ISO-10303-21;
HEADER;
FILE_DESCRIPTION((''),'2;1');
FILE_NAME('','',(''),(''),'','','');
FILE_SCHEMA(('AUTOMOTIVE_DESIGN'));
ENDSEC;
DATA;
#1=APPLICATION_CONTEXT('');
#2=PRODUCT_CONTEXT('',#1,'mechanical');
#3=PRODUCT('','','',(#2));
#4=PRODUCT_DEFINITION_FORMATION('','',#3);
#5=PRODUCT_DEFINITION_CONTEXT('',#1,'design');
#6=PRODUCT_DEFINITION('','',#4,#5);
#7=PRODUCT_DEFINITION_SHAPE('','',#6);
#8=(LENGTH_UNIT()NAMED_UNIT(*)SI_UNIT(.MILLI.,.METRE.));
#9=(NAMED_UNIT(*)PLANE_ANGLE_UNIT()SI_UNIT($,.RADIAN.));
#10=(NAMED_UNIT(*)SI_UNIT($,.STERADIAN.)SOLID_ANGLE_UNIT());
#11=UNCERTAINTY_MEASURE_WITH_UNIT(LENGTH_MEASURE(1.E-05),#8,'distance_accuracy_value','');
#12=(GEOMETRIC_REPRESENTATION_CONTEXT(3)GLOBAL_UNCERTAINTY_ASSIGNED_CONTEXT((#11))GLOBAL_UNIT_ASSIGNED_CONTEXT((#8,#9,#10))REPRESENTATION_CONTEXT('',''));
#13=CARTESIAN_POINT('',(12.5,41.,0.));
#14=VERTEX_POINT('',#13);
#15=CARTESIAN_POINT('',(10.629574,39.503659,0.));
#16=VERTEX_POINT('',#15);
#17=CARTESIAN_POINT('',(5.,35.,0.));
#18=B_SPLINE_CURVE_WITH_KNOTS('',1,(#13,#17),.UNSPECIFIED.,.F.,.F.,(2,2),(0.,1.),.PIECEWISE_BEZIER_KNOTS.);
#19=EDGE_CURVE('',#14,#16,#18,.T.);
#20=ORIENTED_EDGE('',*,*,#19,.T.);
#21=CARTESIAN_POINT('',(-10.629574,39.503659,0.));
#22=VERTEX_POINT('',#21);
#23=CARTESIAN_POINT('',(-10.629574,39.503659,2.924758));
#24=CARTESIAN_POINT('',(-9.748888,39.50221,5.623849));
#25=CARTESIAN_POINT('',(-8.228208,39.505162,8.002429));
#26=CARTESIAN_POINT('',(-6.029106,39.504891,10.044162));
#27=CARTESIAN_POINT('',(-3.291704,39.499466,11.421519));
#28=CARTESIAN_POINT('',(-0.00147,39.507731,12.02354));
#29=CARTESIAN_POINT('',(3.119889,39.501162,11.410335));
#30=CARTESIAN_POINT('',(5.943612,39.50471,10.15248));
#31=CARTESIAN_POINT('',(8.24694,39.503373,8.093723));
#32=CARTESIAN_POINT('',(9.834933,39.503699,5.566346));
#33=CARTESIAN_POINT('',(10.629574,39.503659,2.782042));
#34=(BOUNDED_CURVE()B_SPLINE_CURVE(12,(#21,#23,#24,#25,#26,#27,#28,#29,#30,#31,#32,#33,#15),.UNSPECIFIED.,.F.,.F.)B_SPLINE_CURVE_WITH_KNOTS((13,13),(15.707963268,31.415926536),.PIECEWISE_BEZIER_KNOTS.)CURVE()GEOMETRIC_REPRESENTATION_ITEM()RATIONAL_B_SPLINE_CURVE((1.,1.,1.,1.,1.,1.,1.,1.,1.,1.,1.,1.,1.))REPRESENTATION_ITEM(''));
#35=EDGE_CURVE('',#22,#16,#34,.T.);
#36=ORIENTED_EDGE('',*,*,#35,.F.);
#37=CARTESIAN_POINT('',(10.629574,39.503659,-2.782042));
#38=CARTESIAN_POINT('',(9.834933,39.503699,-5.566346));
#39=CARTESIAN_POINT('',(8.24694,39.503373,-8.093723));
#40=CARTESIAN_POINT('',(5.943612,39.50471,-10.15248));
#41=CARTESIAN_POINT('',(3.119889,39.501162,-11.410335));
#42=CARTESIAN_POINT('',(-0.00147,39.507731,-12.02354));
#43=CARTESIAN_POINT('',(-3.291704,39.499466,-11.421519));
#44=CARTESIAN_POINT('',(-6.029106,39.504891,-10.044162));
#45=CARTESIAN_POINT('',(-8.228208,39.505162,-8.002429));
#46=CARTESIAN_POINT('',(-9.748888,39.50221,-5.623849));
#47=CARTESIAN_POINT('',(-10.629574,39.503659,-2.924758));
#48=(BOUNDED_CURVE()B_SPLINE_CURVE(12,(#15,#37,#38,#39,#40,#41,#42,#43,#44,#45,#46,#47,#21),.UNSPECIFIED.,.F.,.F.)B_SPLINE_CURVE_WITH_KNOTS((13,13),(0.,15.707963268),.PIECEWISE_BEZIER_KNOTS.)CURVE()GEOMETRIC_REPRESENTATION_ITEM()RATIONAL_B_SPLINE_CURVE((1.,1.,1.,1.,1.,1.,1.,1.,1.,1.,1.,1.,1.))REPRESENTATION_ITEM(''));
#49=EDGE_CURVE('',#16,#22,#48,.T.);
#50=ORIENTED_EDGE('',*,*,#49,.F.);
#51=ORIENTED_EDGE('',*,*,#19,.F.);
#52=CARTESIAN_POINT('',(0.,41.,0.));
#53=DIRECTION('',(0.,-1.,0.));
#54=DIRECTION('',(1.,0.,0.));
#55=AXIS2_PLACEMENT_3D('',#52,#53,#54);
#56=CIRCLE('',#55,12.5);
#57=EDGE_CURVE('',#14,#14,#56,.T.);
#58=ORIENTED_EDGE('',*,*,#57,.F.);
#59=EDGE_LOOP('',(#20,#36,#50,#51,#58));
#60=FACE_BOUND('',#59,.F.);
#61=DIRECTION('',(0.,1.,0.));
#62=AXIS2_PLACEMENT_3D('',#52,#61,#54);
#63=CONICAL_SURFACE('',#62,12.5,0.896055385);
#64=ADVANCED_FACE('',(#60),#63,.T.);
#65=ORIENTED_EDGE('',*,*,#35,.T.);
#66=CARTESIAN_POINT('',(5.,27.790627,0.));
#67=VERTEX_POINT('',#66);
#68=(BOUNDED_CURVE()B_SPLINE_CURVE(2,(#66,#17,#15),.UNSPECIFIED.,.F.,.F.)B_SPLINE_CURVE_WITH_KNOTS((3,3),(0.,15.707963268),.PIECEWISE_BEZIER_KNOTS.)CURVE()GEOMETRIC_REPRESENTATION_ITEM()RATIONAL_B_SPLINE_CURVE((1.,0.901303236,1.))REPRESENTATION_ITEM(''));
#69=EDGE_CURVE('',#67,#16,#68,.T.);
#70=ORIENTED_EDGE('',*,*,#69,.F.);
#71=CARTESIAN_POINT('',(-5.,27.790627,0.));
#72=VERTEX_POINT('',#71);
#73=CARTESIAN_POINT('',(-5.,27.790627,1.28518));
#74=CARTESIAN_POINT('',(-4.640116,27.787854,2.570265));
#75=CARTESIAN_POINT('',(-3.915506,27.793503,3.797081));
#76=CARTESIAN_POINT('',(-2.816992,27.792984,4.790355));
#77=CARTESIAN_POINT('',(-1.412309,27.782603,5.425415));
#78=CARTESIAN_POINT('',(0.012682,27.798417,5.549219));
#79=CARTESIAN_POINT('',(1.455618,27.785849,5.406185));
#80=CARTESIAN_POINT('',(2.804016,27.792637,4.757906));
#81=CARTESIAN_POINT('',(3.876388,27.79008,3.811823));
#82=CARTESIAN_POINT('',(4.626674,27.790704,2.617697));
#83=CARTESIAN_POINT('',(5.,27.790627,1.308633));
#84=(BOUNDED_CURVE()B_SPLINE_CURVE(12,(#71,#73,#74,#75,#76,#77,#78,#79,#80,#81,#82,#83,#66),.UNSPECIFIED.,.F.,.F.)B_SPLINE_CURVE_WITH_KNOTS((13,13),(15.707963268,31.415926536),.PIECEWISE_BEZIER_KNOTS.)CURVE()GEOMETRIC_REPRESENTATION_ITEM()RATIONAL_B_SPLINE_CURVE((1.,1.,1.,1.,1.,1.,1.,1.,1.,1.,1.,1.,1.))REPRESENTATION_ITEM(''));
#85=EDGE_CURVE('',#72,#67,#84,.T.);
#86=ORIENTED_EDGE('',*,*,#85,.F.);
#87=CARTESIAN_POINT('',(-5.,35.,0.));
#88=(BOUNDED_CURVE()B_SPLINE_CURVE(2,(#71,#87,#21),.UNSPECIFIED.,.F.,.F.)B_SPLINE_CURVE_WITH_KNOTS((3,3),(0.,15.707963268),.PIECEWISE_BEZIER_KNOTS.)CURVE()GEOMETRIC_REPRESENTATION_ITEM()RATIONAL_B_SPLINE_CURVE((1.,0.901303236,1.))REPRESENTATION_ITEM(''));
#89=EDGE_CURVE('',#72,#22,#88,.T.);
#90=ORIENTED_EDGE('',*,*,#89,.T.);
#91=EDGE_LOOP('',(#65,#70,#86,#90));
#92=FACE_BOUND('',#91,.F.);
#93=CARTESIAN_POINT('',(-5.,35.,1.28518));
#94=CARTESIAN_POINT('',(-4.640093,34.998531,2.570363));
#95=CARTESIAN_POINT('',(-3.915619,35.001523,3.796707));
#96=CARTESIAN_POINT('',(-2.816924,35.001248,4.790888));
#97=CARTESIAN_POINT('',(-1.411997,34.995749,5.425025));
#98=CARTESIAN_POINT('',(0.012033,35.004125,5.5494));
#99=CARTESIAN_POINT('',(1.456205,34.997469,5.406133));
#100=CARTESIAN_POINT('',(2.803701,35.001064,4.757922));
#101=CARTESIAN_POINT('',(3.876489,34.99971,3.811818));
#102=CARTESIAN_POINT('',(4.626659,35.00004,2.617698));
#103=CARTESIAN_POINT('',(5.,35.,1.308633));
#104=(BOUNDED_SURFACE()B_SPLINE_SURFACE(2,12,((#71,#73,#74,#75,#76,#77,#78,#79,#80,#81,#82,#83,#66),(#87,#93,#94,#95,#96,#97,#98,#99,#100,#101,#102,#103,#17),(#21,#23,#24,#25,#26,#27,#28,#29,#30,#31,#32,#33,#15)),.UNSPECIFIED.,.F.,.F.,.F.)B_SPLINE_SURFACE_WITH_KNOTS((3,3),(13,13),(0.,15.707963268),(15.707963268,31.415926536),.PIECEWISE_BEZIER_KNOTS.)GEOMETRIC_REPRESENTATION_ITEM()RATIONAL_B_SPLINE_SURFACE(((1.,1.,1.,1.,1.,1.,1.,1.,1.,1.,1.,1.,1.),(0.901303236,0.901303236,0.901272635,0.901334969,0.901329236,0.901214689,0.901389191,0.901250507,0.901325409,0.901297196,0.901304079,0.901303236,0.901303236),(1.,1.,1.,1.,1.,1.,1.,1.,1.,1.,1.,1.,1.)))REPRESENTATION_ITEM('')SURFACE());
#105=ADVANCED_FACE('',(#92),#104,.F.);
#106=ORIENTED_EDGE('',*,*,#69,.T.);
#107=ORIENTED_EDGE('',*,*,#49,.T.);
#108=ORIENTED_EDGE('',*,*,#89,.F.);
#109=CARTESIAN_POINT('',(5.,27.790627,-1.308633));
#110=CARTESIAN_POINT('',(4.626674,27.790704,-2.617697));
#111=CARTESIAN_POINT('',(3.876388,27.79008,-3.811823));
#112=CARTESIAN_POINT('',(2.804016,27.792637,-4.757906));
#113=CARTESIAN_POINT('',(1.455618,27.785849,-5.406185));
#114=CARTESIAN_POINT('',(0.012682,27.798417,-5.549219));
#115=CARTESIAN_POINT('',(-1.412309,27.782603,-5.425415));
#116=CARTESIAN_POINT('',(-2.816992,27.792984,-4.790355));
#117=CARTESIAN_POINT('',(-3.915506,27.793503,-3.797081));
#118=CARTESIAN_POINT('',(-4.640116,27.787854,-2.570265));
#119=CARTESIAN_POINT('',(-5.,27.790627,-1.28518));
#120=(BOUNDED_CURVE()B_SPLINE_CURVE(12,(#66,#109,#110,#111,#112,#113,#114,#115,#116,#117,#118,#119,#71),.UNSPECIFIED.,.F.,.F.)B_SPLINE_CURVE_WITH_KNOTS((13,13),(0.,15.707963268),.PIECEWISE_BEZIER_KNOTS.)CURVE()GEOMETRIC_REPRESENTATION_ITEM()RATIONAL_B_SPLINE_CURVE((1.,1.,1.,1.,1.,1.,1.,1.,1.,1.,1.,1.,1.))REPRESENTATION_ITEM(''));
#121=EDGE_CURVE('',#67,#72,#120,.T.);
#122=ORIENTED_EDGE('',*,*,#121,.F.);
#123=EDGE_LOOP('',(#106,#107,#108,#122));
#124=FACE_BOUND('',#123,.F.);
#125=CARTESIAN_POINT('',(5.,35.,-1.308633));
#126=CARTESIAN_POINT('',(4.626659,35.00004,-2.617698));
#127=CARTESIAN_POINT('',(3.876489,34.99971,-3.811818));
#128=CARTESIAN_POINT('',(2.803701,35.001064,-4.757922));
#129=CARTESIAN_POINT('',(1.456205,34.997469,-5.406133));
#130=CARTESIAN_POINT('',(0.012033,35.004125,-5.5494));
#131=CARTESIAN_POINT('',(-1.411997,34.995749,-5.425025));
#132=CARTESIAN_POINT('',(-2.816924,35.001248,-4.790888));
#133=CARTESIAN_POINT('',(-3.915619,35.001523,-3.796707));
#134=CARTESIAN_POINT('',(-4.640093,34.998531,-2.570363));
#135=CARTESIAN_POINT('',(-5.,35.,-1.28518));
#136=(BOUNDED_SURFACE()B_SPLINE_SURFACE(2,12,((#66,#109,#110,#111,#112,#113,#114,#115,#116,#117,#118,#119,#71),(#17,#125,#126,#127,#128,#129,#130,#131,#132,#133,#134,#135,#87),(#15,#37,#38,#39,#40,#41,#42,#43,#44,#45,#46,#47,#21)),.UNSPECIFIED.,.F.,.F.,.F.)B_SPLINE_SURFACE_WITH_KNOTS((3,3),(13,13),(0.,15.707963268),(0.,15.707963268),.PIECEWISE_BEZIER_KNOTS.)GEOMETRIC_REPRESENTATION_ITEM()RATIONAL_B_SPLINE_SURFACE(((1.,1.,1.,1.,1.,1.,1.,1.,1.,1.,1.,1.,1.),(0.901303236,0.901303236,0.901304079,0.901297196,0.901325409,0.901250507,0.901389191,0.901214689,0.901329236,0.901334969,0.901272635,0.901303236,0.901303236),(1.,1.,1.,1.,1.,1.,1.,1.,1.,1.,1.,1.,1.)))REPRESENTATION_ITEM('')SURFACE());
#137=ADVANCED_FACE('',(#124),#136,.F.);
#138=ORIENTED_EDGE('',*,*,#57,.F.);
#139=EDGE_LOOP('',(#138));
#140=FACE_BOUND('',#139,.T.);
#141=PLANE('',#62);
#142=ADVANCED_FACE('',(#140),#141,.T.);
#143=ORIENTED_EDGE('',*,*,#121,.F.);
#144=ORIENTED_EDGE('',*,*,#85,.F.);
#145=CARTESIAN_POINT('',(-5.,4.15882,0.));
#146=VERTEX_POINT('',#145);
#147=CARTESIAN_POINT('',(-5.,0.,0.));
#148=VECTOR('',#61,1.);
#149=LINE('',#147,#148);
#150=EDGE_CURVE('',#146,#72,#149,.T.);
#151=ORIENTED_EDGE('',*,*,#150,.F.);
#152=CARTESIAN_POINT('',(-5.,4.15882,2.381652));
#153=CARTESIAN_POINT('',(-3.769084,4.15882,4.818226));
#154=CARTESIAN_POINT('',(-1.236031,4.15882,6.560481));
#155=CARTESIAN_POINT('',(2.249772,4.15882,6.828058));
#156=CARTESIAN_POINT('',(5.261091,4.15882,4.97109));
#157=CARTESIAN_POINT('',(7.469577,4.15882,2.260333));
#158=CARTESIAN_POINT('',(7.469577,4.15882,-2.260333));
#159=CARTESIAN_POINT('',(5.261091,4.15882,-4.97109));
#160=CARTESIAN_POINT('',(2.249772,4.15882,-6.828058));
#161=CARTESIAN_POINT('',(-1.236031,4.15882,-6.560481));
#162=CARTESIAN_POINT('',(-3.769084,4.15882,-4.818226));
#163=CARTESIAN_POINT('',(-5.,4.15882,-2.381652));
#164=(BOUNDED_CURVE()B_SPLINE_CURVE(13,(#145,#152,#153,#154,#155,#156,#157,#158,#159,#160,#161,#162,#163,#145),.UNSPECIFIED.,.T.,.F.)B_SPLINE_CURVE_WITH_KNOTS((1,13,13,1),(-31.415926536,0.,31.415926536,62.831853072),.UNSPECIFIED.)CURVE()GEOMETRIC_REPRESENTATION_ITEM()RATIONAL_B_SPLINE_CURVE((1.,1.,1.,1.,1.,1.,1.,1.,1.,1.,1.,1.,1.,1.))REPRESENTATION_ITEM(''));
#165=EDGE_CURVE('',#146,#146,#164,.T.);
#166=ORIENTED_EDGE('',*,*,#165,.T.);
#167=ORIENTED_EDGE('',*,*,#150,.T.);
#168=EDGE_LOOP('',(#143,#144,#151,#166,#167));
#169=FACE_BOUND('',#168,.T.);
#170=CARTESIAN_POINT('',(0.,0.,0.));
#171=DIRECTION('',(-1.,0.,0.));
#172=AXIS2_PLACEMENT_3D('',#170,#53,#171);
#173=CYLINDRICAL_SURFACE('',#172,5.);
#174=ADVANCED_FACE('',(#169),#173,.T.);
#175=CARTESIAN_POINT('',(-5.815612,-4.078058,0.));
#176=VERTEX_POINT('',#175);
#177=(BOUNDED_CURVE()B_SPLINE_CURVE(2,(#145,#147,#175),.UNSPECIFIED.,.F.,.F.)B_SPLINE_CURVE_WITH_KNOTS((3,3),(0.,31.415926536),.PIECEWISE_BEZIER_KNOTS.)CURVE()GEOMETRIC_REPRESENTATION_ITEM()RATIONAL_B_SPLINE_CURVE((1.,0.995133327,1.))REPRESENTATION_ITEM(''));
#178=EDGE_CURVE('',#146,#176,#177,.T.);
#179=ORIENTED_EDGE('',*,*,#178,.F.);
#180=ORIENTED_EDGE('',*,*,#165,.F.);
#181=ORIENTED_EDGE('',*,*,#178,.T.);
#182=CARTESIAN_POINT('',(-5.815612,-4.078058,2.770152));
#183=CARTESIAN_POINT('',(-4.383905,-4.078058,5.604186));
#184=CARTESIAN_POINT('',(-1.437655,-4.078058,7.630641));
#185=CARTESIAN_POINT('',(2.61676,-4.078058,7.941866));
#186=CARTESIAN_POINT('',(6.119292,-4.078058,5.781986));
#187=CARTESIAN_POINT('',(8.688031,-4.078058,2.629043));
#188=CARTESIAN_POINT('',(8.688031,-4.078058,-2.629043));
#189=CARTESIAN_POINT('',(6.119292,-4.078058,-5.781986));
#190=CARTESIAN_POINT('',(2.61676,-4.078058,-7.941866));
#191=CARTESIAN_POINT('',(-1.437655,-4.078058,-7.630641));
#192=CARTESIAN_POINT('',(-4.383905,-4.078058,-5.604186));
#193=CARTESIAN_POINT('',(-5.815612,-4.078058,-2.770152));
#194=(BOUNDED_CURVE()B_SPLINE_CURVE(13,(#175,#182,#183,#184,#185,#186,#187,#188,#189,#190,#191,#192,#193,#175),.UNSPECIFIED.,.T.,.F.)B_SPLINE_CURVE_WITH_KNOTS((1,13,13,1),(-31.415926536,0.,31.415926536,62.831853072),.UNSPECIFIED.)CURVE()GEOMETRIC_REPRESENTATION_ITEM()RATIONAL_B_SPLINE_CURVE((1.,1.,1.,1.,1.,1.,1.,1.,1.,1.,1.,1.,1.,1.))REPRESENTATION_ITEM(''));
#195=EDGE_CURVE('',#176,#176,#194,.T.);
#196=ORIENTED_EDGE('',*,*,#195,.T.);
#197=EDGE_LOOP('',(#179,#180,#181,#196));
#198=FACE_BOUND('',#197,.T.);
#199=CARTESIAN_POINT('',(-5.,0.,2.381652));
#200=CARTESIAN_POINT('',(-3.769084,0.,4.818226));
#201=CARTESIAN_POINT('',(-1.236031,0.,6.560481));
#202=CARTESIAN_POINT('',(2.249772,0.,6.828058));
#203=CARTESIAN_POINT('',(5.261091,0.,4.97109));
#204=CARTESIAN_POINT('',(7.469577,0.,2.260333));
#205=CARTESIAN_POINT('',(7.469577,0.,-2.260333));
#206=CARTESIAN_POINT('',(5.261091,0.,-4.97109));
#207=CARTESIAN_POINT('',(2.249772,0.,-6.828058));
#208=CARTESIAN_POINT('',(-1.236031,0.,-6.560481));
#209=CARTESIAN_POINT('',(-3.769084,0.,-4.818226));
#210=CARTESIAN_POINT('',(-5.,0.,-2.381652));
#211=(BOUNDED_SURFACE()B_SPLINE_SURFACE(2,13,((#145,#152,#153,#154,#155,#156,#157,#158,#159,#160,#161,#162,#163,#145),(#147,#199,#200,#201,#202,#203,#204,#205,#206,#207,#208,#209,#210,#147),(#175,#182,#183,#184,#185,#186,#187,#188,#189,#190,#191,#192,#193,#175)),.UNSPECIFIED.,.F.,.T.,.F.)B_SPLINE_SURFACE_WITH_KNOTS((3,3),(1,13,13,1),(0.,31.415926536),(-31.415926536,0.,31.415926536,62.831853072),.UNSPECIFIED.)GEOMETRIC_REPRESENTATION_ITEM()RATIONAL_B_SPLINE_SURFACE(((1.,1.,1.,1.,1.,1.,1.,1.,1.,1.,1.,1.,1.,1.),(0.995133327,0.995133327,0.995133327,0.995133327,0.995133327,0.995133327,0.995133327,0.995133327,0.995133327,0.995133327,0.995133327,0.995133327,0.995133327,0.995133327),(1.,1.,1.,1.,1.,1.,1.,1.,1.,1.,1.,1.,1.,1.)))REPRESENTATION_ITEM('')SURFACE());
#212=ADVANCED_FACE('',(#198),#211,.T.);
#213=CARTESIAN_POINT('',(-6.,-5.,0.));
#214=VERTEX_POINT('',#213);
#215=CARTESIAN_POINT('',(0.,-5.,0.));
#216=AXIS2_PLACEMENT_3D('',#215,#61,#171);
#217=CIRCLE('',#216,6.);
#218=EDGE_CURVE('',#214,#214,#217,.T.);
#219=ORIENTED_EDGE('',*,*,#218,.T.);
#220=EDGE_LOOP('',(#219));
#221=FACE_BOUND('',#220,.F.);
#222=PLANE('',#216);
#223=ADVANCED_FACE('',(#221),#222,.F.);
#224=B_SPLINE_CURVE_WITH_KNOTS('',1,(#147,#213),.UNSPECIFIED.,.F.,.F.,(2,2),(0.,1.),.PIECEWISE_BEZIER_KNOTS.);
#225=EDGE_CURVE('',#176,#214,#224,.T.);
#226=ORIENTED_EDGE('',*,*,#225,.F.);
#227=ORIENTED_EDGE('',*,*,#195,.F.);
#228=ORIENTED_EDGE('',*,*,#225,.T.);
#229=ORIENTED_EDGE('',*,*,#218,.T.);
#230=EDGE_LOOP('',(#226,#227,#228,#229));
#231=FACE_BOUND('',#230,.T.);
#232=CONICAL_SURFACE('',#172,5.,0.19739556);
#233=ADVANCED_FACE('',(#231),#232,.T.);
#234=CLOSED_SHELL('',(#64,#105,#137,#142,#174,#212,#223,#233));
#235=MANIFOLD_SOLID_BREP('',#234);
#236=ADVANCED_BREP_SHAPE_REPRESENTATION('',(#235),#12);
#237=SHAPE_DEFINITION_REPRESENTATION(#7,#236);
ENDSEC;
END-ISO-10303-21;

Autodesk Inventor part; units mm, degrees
ref_plane "YZ Plane" through (0, 0, 0) normal (1, 0, 0) x (0, 1, 0)
ref_plane "XY Plane" through (0, 0, 0) normal (0, 0, 1) x (1, 0, 0)
sketch "Sketch1" plane through (0, 0, 0) normal (0, 1, 0) x (-1, 0, 0)
  circle A0 centre (0, 0) radius 5
  dimension "d0" = 10
extrude "Extrusion1" add sketch "Sketch1" along normal blind 35
ref_plane "Work Plane1" through (0, -5, 0) normal (0, 1, 0) x (-1, 0, 0)
sketch "Sketch4" plane through (0, -5, 0) normal (0, 1, 0) x (-1, 0, 0)
  circle A0 centre (0, 0) radius 6
  dimension "d8" = 12
loft "Loft1" add profiles "Sketch4" section 1 edges at (5, 0, 0)
ref_plane "Work Plane2" through (0, 41, 0) normal (0, 1, 0) x (1, 0, 0)
sketch "Sketch5" plane through (0, 41, 0) normal (0, 1, 0) x (1, 0, 0)
  circle A0 centre (0, 0) radius 12.5
  dimension "d14" = 25
loft "Loft2" add profiles "Sketch5" section 2 edges at (5, 35, 0)
fillet "Face Fillet1" radius 15 2 edges at (0, 35, -5) (0, 35, 5)
fillet "Face Fillet2" radius 42 1 edges at (5, 0, 0)
properties part number "table_column"
